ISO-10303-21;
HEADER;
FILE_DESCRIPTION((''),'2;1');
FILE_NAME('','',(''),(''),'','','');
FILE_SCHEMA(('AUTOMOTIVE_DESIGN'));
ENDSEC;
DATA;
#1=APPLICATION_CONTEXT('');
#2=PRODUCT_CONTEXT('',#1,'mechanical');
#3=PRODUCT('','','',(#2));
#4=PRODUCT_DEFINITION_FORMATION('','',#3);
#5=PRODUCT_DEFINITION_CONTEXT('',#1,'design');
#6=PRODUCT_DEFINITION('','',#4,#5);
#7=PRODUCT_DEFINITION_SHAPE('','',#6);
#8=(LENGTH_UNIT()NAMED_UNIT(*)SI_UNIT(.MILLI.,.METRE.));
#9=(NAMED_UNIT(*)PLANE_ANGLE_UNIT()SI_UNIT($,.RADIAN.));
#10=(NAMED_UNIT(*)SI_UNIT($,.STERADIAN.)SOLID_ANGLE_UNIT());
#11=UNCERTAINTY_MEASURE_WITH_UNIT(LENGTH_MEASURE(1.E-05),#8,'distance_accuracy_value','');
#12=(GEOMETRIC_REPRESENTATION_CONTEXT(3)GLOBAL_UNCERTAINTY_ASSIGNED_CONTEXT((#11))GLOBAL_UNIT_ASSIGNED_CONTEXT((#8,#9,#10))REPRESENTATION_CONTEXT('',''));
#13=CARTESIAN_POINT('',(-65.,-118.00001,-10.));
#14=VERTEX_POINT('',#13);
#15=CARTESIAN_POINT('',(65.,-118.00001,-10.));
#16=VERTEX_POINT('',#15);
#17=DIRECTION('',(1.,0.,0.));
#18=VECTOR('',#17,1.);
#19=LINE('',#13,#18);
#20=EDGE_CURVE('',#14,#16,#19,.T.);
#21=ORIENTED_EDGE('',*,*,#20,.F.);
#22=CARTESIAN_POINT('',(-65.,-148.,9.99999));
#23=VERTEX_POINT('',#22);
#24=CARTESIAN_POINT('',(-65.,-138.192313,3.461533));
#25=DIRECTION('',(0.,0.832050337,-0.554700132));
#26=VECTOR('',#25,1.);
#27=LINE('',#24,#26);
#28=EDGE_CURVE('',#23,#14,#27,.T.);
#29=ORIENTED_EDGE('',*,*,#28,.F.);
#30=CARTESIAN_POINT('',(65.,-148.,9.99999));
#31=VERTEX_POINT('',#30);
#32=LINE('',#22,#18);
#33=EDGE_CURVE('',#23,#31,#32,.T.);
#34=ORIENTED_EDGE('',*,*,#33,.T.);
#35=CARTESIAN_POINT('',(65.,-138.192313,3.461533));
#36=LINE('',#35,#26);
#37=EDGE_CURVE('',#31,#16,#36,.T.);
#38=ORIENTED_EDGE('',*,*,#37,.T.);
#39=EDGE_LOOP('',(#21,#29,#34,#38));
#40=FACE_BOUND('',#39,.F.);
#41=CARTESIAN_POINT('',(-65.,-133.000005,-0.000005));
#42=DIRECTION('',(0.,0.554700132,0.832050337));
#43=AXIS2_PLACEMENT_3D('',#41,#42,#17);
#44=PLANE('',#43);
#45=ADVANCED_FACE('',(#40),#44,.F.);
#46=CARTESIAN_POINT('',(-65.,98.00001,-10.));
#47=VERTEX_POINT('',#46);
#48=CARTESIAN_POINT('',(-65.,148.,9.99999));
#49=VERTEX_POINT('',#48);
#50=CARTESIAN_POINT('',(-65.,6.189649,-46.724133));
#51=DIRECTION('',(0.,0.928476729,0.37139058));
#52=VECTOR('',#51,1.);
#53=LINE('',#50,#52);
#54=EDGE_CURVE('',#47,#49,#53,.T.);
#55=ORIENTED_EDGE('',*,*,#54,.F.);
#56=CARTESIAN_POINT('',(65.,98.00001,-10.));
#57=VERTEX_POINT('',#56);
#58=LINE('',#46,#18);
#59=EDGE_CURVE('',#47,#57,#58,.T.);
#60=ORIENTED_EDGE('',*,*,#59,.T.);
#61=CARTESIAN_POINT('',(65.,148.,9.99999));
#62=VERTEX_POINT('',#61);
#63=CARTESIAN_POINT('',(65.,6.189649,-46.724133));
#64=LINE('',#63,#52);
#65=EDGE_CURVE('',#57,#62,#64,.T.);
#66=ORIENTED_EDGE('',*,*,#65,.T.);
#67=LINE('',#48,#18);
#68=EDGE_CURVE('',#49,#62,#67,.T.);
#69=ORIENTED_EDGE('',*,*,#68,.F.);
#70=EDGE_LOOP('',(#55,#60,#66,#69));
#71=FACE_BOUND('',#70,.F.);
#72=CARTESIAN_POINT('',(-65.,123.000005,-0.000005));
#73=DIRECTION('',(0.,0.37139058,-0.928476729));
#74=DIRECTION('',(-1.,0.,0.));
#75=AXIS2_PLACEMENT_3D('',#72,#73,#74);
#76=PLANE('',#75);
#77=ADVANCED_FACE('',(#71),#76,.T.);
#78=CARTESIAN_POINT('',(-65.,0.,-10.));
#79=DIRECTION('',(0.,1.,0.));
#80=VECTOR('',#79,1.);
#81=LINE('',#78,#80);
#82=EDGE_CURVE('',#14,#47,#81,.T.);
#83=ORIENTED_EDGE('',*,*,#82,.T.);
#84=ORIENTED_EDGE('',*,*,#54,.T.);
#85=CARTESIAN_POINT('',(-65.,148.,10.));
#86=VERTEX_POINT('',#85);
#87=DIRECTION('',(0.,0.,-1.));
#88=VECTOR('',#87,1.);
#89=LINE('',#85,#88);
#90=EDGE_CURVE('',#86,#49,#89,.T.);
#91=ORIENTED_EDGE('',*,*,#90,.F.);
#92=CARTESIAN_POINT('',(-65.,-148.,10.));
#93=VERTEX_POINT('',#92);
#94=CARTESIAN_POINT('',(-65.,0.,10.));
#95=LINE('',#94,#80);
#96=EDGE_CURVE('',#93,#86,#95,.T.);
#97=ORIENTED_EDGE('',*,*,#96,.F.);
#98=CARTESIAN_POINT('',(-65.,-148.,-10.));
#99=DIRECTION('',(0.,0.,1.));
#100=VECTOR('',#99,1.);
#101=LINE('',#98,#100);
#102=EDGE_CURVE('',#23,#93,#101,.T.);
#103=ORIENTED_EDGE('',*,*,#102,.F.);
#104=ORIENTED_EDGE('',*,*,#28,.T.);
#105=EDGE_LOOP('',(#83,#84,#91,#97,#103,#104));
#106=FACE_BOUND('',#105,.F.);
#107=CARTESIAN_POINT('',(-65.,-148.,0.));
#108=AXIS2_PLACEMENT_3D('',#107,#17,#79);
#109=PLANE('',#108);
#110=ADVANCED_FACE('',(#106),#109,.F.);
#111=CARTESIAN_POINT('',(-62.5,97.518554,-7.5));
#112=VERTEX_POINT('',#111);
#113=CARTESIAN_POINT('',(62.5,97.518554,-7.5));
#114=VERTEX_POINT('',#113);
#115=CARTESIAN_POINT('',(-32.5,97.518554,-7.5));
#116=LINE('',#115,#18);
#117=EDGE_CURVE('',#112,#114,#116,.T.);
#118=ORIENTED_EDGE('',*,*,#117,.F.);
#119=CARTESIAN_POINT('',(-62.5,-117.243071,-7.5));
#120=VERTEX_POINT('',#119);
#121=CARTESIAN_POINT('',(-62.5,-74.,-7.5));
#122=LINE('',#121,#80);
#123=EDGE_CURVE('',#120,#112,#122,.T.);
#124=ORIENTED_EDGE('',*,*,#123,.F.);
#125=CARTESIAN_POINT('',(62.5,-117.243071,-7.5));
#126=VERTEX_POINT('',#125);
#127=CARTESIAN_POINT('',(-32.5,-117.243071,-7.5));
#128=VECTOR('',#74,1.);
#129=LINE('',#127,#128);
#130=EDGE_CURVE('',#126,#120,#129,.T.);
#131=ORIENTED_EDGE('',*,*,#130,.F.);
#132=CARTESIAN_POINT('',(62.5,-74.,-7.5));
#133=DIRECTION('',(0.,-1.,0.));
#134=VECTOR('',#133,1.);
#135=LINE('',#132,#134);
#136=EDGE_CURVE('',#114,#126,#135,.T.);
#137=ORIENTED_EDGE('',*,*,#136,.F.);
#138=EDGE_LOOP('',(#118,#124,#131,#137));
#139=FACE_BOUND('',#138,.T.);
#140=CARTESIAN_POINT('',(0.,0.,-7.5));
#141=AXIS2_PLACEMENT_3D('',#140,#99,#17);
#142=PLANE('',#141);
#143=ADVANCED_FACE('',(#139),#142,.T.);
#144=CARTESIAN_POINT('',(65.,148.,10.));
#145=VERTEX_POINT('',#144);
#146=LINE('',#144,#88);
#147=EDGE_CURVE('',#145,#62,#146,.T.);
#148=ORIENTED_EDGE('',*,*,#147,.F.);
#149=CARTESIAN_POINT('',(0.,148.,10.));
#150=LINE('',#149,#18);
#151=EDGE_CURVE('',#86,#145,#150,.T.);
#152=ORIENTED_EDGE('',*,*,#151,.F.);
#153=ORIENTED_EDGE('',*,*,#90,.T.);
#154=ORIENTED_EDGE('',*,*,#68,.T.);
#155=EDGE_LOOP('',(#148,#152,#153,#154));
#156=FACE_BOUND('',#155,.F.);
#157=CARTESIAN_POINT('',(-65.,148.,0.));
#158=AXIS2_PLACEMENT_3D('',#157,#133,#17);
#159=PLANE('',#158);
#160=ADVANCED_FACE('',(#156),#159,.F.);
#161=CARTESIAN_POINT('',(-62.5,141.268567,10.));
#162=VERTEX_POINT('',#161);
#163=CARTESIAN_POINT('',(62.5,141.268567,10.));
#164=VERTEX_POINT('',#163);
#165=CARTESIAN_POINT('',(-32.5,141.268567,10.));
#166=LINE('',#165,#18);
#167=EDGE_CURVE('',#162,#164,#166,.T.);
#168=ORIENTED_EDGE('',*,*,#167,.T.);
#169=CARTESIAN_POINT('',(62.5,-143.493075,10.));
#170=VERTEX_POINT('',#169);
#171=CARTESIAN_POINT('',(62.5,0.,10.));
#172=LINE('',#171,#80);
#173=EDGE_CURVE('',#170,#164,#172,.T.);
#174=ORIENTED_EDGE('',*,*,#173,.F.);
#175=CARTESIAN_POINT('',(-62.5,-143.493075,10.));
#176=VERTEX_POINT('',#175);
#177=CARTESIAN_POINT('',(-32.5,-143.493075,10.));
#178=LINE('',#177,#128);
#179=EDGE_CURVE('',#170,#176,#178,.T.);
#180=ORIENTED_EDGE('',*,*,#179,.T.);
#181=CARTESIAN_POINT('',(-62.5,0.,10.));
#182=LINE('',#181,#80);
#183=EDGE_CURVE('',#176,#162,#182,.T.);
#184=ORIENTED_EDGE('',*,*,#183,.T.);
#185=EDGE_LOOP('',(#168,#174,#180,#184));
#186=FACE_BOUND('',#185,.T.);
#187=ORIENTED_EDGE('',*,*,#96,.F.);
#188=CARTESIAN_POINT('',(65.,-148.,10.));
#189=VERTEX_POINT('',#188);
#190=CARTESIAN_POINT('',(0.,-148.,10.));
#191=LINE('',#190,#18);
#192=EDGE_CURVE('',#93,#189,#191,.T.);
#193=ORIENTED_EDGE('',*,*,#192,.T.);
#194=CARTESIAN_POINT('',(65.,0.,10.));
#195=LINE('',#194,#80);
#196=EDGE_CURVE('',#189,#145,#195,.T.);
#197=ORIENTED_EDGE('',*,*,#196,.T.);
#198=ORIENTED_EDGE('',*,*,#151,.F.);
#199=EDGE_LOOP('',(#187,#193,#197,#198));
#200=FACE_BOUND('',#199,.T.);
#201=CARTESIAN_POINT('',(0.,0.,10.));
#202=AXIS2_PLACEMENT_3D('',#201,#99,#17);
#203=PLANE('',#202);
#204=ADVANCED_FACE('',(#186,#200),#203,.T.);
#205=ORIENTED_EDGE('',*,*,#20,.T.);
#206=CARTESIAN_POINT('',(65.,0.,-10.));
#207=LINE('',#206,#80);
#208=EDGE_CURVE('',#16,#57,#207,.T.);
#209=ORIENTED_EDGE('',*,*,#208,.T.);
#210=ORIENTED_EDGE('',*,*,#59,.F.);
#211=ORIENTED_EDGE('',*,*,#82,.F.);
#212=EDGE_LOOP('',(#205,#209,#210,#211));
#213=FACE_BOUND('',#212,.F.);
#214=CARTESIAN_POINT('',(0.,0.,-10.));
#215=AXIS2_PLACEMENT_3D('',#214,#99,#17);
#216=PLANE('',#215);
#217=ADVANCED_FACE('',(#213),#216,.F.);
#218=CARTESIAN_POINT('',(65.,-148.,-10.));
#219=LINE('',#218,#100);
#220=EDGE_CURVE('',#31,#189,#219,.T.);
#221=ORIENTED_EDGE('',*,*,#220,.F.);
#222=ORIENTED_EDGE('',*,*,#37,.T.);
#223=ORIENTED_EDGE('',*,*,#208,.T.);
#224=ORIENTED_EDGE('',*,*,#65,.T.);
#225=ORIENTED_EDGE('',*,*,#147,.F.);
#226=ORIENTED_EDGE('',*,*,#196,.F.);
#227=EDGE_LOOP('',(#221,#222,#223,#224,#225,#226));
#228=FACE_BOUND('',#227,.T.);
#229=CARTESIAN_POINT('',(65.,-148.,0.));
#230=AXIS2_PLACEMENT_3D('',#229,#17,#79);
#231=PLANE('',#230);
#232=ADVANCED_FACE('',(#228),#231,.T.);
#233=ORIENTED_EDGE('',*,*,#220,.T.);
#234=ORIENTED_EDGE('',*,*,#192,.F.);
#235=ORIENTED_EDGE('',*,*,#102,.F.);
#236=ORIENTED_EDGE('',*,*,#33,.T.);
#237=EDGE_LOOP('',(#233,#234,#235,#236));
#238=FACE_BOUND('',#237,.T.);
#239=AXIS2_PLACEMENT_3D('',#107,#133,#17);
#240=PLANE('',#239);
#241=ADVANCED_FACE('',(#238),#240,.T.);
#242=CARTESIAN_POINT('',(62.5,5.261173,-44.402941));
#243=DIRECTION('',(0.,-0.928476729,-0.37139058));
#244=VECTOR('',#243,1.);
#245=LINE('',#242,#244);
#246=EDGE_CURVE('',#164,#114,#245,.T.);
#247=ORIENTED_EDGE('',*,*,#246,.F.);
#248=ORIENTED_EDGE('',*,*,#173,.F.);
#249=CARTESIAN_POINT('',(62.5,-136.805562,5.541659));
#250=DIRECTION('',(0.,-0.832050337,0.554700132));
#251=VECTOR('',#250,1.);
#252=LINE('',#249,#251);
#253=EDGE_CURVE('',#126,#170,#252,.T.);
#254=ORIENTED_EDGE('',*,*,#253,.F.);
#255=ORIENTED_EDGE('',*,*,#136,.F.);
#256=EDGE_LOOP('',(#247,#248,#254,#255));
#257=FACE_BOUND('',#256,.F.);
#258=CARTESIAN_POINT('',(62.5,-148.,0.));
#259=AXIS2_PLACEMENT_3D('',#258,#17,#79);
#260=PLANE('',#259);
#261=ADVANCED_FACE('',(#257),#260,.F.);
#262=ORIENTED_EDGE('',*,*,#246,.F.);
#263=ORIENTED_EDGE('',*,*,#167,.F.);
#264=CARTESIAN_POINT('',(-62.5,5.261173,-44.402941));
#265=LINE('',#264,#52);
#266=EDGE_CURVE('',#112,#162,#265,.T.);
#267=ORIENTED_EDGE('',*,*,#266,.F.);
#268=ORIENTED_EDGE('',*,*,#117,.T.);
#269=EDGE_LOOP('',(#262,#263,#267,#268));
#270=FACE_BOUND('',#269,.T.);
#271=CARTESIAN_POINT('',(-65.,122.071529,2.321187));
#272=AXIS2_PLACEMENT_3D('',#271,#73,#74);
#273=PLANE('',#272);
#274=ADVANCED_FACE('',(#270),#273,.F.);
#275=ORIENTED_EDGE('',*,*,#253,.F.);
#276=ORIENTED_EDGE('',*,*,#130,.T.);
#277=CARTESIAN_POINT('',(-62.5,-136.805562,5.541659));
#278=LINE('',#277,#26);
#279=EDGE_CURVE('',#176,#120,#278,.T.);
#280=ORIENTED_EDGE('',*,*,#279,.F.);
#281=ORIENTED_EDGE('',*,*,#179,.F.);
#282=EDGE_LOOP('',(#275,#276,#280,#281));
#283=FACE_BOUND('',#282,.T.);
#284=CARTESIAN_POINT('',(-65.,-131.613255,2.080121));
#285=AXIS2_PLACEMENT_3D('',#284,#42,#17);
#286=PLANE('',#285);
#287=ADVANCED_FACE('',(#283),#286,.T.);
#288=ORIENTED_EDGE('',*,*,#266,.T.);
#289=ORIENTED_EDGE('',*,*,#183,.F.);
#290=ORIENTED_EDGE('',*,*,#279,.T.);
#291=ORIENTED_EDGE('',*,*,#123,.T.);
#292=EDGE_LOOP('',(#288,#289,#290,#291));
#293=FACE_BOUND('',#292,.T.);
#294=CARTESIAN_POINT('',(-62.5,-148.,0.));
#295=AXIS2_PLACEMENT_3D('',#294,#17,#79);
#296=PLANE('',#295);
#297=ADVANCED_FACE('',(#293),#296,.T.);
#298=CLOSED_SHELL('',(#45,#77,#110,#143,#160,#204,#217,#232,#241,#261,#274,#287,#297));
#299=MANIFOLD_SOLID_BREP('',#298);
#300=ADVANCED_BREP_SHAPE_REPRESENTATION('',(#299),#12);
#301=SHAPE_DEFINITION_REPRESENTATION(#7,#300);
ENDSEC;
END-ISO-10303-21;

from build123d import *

# Parameters (mm, degrees)
F0_W     = 130
F0_H     = 296
F1_DEPTH = 10
F2_SIZE2 = 29.99999
F2_SIZE  = 19.99999
F3_SIZE2 = 19.99999
F3_SIZE  = 49.99999
F4_T     = 2.5


# Not quite as in the source:
# - a fillet or chamfer is up to 0.001 mm smaller than in the source, because OpenCascade refuses the exact size
# - a shell that OpenCascade refuses in one call is made with other operations: the cavity is built on its own and cut out


with BuildPart() as f1:
    # F0 (on Top) → F1 (new body, symmetric)
    with BuildSketch(Plane.XY):
        Rectangle(F0_W, F0_H)
    extrude(amount=F1_DEPTH, both=True)

    # F2 (size 20 and 30 in the source; OpenCascade refuses exactly that, so slightly less here)
    f2_edges = [f1.edges().sort_by_distance(p)[0] for p in [
        (0, -148, -10),
    ]]
    f2_side = f1.faces().sort_by_distance((0, -148, 0))[0]
    chamfer(f2_edges, length=F2_SIZE, length2=F2_SIZE2, reference=f2_side)

    # F3 (size 50 and 20 in the source; OpenCascade refuses exactly that, so slightly less here)
    f3_edges = [f1.edges().sort_by_distance(p)[0] for p in [
        (0, 148, -10),
    ]]
    f3_side = f1.faces().sort_by_distance((0, 14.999995, -10))[0]
    chamfer(f3_edges, length=F3_SIZE, length2=F3_SIZE2, reference=f3_side)

    # F4: shell of thickness 2.5, made by hand


with BuildPart() as f4_core1:
    # F4_t2: copy of F1
    add(f1.part)

    # the walls: a layer under each face that stays
    f4_faces = [f4_core1.faces().sort_by_distance(p)[0] for p in [
        (65, 0, 0),
        (0, -10, -10),
        (0, 123.000005, -5e-06),
        (0, -133.000005, -5e-06),
        (0, 148, 9.999995),
        (0, -148, 9.999995),
        (-65, 0, 0),
    ]]
    thicken(f4_faces, amount=-F4_T, mode=Mode.SUBTRACT)


with BuildPart() as f1_1:
    add(f1.part)

    # what is left inside the walls is the cavity
    f4_cavity = [f4_core1.part.solids().sort_by_distance(p)[0] for p in [
        (0, -48.572528, 9.975),
    ]]
    add(f4_cavity, mode=Mode.SUBTRACT)


solid = f1_1.part
